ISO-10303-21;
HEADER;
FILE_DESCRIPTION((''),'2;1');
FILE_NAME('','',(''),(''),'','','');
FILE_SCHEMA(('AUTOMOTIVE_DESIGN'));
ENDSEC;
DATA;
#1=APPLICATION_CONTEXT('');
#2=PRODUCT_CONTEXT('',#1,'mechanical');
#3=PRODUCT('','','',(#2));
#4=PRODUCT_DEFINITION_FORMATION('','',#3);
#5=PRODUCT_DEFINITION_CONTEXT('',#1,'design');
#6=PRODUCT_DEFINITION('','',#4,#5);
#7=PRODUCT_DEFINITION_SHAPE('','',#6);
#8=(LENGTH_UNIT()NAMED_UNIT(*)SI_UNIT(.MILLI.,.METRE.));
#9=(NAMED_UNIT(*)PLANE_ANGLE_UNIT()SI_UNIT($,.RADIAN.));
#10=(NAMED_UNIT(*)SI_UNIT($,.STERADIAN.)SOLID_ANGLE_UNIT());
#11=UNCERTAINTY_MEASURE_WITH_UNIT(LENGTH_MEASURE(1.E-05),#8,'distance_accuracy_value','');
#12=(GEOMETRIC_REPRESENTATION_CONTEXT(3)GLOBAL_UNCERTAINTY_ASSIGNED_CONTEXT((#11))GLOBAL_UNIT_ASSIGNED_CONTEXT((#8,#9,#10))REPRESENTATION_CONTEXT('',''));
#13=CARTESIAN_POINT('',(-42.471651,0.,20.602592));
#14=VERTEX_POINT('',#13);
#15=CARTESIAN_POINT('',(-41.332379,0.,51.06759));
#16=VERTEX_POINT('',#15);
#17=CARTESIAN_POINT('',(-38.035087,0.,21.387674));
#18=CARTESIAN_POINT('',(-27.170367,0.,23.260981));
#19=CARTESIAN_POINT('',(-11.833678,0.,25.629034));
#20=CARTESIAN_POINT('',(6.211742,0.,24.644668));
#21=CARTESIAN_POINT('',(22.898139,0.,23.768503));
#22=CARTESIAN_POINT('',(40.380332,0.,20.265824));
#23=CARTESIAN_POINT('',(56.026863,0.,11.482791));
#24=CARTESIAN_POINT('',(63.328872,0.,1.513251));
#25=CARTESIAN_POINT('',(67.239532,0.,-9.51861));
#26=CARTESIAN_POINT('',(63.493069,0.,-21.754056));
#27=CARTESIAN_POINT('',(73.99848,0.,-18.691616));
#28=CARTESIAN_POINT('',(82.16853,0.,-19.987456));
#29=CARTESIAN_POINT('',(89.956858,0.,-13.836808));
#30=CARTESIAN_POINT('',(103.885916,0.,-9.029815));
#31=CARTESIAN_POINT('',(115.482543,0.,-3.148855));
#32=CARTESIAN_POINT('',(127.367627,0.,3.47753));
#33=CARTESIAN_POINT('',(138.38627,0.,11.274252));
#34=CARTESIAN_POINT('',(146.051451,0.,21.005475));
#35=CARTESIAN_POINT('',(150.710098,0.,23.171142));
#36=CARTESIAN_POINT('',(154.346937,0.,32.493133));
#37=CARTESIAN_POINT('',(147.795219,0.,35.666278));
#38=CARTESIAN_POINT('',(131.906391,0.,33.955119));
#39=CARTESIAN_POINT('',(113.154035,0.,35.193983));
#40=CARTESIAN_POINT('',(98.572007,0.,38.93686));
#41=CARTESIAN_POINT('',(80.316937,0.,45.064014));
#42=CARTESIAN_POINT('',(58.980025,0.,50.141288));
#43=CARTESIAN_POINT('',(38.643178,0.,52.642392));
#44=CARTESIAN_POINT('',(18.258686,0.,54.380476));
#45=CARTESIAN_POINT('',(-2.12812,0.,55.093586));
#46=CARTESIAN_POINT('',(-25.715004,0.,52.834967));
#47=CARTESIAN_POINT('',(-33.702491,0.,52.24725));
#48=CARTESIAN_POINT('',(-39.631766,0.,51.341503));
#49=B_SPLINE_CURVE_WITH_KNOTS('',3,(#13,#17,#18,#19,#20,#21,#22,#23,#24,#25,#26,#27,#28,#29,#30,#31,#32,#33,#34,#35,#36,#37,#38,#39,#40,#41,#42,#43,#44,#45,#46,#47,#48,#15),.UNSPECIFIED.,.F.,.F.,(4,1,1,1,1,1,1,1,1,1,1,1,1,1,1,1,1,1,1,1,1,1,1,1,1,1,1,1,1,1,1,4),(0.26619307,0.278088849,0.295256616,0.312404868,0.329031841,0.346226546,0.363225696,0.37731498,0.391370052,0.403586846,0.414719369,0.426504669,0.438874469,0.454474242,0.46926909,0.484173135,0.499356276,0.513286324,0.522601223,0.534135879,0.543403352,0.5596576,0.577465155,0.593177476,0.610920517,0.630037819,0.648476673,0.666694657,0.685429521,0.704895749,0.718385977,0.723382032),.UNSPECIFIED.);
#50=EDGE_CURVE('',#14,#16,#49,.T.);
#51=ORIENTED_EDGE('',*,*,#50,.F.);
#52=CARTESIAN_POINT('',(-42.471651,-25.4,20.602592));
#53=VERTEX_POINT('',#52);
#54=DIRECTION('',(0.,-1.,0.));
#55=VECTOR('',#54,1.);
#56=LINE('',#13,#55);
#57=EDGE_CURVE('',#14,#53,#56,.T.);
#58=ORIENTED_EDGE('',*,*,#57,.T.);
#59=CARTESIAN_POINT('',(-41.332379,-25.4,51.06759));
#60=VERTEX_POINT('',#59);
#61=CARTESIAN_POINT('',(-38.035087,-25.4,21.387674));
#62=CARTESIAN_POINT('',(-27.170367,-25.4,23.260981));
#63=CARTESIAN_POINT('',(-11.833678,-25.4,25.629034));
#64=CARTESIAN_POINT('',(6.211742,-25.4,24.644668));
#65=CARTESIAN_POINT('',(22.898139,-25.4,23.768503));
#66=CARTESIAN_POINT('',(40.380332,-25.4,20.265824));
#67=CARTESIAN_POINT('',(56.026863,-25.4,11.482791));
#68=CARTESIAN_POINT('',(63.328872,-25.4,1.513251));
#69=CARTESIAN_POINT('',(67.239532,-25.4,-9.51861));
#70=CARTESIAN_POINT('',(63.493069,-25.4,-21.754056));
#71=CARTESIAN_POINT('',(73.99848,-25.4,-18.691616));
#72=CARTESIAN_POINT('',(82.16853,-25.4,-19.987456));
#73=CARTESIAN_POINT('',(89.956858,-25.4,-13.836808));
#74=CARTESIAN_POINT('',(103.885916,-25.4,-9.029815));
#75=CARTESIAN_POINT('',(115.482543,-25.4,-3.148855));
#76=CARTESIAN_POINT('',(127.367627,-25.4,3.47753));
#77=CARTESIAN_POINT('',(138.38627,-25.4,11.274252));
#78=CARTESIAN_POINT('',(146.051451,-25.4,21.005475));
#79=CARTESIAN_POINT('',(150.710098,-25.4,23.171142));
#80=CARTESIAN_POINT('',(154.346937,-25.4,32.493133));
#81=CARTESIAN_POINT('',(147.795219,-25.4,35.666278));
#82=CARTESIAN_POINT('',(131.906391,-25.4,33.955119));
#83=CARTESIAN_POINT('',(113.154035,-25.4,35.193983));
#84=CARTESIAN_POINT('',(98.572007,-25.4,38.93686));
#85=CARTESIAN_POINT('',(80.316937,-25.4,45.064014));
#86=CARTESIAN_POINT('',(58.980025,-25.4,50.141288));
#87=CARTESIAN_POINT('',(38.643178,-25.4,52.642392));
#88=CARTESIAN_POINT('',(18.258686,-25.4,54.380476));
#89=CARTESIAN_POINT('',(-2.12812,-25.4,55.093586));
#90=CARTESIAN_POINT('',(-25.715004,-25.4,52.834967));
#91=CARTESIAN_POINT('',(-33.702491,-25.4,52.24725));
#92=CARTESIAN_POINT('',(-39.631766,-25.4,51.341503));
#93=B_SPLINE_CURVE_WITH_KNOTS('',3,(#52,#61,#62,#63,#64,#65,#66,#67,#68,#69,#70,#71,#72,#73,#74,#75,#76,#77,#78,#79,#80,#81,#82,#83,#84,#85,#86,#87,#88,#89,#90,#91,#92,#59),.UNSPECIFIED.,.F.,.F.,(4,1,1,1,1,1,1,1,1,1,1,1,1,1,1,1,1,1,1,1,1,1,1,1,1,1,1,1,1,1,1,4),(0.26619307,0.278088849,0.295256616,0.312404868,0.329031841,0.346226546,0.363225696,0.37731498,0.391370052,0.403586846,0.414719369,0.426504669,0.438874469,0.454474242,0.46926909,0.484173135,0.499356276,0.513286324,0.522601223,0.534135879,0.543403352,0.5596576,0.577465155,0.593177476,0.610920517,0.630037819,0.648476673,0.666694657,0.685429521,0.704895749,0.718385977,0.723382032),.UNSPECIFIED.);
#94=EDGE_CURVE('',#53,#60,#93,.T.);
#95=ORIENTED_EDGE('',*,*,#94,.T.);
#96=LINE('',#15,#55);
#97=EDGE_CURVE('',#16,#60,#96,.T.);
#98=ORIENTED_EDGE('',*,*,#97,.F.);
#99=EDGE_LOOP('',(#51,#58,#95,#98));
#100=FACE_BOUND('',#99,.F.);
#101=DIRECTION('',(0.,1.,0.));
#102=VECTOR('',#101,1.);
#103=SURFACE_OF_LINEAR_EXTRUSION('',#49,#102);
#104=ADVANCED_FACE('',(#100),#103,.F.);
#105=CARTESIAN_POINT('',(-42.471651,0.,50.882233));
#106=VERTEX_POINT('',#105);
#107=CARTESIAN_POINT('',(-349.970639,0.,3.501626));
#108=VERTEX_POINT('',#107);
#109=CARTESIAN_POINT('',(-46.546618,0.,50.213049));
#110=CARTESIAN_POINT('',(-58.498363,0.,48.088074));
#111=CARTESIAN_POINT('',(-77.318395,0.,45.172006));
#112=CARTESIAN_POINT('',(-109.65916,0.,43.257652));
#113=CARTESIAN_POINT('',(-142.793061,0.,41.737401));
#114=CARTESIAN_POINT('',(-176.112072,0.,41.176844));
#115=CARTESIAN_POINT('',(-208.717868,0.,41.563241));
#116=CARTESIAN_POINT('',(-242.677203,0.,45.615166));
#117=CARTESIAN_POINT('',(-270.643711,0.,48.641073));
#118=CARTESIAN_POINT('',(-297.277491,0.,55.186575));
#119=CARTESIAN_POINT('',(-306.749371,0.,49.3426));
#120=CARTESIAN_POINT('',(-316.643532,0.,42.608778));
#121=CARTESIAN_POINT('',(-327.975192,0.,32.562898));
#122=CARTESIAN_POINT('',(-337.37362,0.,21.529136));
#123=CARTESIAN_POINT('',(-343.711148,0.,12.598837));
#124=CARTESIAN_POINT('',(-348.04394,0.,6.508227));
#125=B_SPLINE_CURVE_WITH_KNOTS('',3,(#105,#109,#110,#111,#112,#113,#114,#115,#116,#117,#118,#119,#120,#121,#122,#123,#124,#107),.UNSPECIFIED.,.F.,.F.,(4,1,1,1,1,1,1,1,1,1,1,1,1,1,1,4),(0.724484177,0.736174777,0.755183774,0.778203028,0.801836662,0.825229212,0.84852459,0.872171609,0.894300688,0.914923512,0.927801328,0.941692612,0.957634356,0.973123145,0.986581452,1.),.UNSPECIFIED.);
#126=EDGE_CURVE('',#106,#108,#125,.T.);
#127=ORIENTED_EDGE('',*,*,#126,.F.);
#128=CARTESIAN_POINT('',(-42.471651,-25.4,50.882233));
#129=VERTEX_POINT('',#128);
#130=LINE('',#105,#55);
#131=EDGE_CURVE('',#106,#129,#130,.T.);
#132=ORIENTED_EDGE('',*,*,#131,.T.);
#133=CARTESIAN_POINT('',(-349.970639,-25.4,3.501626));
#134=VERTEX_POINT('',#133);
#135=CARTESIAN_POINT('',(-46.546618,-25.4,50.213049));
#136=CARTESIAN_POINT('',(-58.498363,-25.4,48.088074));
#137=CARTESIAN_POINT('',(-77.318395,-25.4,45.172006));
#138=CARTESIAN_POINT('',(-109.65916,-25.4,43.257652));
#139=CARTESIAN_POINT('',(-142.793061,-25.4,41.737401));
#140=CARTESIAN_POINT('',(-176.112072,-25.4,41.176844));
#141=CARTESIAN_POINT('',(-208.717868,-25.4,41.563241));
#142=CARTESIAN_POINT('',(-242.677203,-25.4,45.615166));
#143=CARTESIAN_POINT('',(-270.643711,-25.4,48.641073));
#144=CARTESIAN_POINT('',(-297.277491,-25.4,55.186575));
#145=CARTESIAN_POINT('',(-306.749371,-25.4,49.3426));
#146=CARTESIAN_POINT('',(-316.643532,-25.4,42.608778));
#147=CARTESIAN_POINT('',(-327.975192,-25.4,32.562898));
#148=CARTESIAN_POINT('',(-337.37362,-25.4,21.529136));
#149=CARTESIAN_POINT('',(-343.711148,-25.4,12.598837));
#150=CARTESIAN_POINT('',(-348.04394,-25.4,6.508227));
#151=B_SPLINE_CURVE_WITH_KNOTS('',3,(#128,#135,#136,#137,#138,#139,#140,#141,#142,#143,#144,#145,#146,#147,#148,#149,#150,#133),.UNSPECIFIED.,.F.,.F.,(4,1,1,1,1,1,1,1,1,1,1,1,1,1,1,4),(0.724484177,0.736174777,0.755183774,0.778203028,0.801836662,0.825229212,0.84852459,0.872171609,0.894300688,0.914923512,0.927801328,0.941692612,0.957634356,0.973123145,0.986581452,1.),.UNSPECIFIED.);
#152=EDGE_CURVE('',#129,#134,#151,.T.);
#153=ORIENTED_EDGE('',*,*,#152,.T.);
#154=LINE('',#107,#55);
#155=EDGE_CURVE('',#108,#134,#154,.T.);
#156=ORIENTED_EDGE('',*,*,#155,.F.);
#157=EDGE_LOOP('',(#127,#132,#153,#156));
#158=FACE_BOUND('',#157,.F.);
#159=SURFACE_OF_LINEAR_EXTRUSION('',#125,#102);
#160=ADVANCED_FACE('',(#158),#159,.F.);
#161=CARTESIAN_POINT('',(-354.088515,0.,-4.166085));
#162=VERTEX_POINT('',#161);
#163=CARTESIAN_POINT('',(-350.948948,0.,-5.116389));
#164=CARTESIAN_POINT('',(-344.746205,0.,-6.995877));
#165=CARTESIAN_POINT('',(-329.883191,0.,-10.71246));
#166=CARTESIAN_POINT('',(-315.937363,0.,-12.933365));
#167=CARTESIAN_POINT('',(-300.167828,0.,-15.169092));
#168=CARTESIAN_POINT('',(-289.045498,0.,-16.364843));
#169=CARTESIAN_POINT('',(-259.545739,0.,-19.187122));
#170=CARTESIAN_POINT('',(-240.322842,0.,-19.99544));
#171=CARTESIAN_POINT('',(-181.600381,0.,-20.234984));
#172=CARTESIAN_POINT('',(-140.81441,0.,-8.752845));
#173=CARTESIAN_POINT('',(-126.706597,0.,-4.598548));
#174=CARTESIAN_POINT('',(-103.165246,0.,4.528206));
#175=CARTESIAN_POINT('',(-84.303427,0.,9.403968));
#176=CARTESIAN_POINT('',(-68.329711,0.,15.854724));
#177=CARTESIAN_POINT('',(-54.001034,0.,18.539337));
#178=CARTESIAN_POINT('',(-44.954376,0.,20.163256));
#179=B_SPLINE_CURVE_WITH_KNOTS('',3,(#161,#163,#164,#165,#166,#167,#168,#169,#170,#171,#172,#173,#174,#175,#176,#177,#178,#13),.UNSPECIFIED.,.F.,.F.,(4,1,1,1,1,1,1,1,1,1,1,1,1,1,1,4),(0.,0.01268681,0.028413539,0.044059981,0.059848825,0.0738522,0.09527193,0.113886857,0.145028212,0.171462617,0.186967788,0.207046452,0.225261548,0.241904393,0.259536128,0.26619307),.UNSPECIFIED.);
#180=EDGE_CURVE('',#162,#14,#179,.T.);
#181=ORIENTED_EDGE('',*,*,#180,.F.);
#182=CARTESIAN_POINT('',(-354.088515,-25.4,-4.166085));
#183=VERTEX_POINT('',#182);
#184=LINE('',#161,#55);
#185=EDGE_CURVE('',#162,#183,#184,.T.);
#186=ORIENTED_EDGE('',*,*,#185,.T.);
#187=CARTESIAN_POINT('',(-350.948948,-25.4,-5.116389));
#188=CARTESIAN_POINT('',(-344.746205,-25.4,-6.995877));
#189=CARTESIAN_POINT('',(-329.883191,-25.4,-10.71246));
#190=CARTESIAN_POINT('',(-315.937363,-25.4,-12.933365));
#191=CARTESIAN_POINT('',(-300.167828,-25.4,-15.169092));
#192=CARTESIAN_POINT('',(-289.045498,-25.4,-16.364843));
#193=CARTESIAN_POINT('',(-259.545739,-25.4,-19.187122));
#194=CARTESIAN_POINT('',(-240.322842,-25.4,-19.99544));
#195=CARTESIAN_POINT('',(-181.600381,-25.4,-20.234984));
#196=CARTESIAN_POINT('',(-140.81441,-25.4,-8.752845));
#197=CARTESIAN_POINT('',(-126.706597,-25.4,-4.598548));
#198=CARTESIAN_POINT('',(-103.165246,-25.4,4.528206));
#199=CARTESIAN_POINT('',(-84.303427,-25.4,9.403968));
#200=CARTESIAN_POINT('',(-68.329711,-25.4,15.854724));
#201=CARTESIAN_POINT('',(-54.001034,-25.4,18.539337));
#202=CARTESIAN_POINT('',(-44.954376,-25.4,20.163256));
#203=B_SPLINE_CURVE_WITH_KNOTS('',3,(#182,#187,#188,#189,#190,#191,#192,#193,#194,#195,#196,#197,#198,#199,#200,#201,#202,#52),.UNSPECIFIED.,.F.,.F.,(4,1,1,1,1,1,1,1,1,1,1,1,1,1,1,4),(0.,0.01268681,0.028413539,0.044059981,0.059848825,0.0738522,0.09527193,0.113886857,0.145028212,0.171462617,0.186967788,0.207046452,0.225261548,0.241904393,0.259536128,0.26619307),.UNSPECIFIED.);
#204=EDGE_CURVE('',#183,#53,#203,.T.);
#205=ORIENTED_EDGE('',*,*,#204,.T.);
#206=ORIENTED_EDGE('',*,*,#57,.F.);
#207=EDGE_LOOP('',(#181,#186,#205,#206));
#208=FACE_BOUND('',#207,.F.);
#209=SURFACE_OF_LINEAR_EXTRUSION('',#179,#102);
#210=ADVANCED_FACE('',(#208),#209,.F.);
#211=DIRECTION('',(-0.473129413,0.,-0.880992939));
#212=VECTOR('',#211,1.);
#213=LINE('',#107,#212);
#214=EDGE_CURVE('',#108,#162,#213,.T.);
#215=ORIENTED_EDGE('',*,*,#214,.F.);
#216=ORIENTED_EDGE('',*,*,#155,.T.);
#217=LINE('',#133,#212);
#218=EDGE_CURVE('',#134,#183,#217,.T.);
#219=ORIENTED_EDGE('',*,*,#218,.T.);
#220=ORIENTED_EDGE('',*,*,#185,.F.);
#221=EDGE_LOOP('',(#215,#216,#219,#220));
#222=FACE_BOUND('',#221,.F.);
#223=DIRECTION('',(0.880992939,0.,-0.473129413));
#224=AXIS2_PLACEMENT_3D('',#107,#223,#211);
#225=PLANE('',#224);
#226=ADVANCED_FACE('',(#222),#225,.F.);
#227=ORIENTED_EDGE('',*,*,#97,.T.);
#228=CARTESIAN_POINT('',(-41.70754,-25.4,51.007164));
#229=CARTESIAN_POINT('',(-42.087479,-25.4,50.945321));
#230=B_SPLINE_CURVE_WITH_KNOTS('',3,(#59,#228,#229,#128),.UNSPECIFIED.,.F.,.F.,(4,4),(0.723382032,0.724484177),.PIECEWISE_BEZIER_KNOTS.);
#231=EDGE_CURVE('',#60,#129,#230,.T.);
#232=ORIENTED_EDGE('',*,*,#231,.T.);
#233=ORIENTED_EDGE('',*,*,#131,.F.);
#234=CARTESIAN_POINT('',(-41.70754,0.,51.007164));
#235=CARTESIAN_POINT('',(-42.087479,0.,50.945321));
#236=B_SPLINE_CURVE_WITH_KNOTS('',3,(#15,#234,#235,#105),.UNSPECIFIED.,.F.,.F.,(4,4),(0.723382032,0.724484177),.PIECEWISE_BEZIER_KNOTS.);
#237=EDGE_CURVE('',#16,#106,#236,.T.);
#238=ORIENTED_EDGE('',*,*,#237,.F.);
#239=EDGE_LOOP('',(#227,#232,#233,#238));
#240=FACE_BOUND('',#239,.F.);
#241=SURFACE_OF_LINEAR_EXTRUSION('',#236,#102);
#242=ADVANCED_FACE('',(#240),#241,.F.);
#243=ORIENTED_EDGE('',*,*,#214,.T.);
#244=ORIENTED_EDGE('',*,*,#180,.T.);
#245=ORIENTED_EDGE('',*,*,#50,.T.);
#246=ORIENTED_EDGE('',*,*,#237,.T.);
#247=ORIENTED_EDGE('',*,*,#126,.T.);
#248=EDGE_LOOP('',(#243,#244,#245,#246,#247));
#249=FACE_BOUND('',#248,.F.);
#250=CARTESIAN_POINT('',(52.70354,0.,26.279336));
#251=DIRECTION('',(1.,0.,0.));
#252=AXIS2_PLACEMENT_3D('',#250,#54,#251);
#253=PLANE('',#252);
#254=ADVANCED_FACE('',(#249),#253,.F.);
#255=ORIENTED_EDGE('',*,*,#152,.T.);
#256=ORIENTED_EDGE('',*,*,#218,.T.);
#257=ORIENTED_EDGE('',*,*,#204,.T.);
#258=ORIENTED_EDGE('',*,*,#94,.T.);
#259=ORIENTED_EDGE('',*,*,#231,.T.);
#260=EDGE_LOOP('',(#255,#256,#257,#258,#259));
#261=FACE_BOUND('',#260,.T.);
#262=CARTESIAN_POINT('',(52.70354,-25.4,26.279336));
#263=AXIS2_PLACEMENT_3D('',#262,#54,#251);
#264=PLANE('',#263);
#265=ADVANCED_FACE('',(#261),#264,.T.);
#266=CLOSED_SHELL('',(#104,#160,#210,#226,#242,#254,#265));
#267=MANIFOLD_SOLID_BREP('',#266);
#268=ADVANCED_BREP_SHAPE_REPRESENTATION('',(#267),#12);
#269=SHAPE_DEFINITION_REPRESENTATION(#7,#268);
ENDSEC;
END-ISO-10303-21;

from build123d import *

# Parameters (mm, degrees)
F1_DEPTH = 25.4


with BuildPart() as f1:
    # F0 (on Front) → F1 (new body)
    with BuildSketch(Plane.XZ):
        with BuildLine():
            add(Edge.make_bspline(
                [(-41.3323794244, 51.0675903058), (-41.707539983, 51.0071643032), (-42.0874786851, 50.9453207608), (-42.4716510296, 50.8822327158)],
                knots=[0.7233820323, 0.7233820323, 0.7233820323, 0.7233820323, 0.7244841774, 0.7244841774, 0.7244841774, 0.7244841774], degree=3))
            Line((-42.4716510296, 50.8822327158), (-42.4716510296, 20.6025924894))
            add(Edge.make_bspline(
                [(-42.4716510296, 20.6025924894), (-38.0350865118, 21.387674424), (-27.1703671298, 23.2609805149), (-11.8336777596, 25.6290338302), (6.2117415006, 24.6446677805), (22.8981387265, 23.7685028967), (40.3803315985, 20.265824034), (56.0268632555, 11.4827913687), (63.3288722201, 1.5132508922), (67.2395318395, -9.5186102569), (63.4930685042, -21.7540557946), (73.9984795886, -18.6916156231), (82.1685298982, -19.9874563616), (89.9568581577, -13.8368079067), (103.8859155375, -9.029814598), (115.48254286, -3.1488551069), (127.3676268383, 3.4775298147), (138.3862701068, 11.274252363), (146.0514505158, 21.0054750541), (150.7100984849, 23.1711418755), (154.3469370428, 32.4931326622), (147.7952194183, 35.6662775706), (131.9063905367, 33.9551189768), (113.1540349234, 35.1939826272), (98.5720074401, 38.9368599863), (80.3169366587, 45.0640141502), (58.980025117, 50.1412876611), (38.6431779668, 52.6423918075), (18.2586858505, 54.3804757709), (-2.1281200842, 55.0935858146), (-25.7150036655, 52.83496744), (-33.7024906401, 52.247249559), (-39.6317656905, 51.3415031345), (-41.3323794244, 51.0675903058)],
                knots=[0.2661930696, 0.2661930696, 0.2661930696, 0.2661930696, 0.2780888488, 0.2952566157, 0.3124048676, 0.3290318413, 0.3462265461, 0.3632256959, 0.3773149803, 0.3913700519, 0.4035868461, 0.4147193685, 0.4265046687, 0.4388744688, 0.4544742419, 0.4692690904, 0.4841731354, 0.4993562758, 0.5132863243, 0.5226012229, 0.5341358793, 0.5434033522, 0.5596575999, 0.5774651553, 0.5931774764, 0.6109205173, 0.6300378187, 0.6484766733, 0.6666946566, 0.6854295214, 0.7048957488, 0.7183859765, 0.7233820323, 0.7233820323, 0.7233820323, 0.7233820323], degree=3))
        make_face()
        with BuildLine():
            Line((-42.4716510296, 20.6025924894), (-42.4716510296, 50.8822327158))
            add(Edge.make_bspline(
                [(-42.4716510296, 50.8822327158), (-46.5466181639, 50.2130494346), (-58.4983628647, 48.0880744628), (-77.3183947596, 45.1720060107), (-109.6591600511, 43.2576521666), (-142.7930612804, 41.7374006357), (-176.1120717601, 41.1768442804), (-208.717867936, 41.5632407424), (-242.6772032351, 45.6151659887), (-270.6437105384, 48.6410725006), (-297.2774912922, 55.186574868), (-306.7493706772, 49.342600006), (-316.6435316034, 42.6087777486), (-327.9751917318, 32.5628982927), (-337.3736197705, 21.5291356577), (-343.7111475225, 12.5988365582), (-348.0439396481, 6.508227293), (-349.970638752, 3.5016264301)],
                knots=[0.7244841774, 0.7244841774, 0.7244841774, 0.7244841774, 0.7361747771, 0.7551837741, 0.7782030276, 0.8018366623, 0.8252292117, 0.8485245896, 0.8721716095, 0.8943006879, 0.9149235119, 0.9278013284, 0.9416926123, 0.9576343562, 0.9731231453, 0.9865814519, 1, 1, 1, 1], degree=3))
            Line((-349.970638752, 3.5016264301), (-354.0885150433, -4.166085273))
            add(Edge.make_bspline(
                [(-354.0885150433, -4.166085273), (-350.9489476716, -5.1163888722), (-344.7462049827, -6.9958771891), (-329.8831910928, -10.712460005), (-315.9373628446, -12.9333647914), (-300.1678276103, -15.1690919729), (-289.0454983502, -16.3648427127), (-259.5457385506, -19.1871218728), (-240.3228415722, -19.9954402709), (-181.6003811838, -20.2349839719), (-140.814410437, -8.752844586), (-126.7065965954, -4.5985483975), (-103.1652458391, 4.5282060409), (-84.3034271709, 9.4039683704), (-68.3297105852, 15.8547238988), (-54.0010339859, 18.5393369104), (-44.9543762176, 20.1632564477), (-42.4716510296, 20.6025924894)],
                knots=[0, 0, 0, 0, 0.01268681, 0.0284135387, 0.0440599814, 0.0598488247, 0.0738522004, 0.0952719295, 0.1138868566, 0.1450282116, 0.171462617, 0.186967788, 0.2070464518, 0.2252615484, 0.2419043928, 0.259536128, 0.2661930696, 0.2661930696, 0.2661930696, 0.2661930696], degree=3))
        make_face()
    extrude(amount=F1_DEPTH)


solid = f1.part
